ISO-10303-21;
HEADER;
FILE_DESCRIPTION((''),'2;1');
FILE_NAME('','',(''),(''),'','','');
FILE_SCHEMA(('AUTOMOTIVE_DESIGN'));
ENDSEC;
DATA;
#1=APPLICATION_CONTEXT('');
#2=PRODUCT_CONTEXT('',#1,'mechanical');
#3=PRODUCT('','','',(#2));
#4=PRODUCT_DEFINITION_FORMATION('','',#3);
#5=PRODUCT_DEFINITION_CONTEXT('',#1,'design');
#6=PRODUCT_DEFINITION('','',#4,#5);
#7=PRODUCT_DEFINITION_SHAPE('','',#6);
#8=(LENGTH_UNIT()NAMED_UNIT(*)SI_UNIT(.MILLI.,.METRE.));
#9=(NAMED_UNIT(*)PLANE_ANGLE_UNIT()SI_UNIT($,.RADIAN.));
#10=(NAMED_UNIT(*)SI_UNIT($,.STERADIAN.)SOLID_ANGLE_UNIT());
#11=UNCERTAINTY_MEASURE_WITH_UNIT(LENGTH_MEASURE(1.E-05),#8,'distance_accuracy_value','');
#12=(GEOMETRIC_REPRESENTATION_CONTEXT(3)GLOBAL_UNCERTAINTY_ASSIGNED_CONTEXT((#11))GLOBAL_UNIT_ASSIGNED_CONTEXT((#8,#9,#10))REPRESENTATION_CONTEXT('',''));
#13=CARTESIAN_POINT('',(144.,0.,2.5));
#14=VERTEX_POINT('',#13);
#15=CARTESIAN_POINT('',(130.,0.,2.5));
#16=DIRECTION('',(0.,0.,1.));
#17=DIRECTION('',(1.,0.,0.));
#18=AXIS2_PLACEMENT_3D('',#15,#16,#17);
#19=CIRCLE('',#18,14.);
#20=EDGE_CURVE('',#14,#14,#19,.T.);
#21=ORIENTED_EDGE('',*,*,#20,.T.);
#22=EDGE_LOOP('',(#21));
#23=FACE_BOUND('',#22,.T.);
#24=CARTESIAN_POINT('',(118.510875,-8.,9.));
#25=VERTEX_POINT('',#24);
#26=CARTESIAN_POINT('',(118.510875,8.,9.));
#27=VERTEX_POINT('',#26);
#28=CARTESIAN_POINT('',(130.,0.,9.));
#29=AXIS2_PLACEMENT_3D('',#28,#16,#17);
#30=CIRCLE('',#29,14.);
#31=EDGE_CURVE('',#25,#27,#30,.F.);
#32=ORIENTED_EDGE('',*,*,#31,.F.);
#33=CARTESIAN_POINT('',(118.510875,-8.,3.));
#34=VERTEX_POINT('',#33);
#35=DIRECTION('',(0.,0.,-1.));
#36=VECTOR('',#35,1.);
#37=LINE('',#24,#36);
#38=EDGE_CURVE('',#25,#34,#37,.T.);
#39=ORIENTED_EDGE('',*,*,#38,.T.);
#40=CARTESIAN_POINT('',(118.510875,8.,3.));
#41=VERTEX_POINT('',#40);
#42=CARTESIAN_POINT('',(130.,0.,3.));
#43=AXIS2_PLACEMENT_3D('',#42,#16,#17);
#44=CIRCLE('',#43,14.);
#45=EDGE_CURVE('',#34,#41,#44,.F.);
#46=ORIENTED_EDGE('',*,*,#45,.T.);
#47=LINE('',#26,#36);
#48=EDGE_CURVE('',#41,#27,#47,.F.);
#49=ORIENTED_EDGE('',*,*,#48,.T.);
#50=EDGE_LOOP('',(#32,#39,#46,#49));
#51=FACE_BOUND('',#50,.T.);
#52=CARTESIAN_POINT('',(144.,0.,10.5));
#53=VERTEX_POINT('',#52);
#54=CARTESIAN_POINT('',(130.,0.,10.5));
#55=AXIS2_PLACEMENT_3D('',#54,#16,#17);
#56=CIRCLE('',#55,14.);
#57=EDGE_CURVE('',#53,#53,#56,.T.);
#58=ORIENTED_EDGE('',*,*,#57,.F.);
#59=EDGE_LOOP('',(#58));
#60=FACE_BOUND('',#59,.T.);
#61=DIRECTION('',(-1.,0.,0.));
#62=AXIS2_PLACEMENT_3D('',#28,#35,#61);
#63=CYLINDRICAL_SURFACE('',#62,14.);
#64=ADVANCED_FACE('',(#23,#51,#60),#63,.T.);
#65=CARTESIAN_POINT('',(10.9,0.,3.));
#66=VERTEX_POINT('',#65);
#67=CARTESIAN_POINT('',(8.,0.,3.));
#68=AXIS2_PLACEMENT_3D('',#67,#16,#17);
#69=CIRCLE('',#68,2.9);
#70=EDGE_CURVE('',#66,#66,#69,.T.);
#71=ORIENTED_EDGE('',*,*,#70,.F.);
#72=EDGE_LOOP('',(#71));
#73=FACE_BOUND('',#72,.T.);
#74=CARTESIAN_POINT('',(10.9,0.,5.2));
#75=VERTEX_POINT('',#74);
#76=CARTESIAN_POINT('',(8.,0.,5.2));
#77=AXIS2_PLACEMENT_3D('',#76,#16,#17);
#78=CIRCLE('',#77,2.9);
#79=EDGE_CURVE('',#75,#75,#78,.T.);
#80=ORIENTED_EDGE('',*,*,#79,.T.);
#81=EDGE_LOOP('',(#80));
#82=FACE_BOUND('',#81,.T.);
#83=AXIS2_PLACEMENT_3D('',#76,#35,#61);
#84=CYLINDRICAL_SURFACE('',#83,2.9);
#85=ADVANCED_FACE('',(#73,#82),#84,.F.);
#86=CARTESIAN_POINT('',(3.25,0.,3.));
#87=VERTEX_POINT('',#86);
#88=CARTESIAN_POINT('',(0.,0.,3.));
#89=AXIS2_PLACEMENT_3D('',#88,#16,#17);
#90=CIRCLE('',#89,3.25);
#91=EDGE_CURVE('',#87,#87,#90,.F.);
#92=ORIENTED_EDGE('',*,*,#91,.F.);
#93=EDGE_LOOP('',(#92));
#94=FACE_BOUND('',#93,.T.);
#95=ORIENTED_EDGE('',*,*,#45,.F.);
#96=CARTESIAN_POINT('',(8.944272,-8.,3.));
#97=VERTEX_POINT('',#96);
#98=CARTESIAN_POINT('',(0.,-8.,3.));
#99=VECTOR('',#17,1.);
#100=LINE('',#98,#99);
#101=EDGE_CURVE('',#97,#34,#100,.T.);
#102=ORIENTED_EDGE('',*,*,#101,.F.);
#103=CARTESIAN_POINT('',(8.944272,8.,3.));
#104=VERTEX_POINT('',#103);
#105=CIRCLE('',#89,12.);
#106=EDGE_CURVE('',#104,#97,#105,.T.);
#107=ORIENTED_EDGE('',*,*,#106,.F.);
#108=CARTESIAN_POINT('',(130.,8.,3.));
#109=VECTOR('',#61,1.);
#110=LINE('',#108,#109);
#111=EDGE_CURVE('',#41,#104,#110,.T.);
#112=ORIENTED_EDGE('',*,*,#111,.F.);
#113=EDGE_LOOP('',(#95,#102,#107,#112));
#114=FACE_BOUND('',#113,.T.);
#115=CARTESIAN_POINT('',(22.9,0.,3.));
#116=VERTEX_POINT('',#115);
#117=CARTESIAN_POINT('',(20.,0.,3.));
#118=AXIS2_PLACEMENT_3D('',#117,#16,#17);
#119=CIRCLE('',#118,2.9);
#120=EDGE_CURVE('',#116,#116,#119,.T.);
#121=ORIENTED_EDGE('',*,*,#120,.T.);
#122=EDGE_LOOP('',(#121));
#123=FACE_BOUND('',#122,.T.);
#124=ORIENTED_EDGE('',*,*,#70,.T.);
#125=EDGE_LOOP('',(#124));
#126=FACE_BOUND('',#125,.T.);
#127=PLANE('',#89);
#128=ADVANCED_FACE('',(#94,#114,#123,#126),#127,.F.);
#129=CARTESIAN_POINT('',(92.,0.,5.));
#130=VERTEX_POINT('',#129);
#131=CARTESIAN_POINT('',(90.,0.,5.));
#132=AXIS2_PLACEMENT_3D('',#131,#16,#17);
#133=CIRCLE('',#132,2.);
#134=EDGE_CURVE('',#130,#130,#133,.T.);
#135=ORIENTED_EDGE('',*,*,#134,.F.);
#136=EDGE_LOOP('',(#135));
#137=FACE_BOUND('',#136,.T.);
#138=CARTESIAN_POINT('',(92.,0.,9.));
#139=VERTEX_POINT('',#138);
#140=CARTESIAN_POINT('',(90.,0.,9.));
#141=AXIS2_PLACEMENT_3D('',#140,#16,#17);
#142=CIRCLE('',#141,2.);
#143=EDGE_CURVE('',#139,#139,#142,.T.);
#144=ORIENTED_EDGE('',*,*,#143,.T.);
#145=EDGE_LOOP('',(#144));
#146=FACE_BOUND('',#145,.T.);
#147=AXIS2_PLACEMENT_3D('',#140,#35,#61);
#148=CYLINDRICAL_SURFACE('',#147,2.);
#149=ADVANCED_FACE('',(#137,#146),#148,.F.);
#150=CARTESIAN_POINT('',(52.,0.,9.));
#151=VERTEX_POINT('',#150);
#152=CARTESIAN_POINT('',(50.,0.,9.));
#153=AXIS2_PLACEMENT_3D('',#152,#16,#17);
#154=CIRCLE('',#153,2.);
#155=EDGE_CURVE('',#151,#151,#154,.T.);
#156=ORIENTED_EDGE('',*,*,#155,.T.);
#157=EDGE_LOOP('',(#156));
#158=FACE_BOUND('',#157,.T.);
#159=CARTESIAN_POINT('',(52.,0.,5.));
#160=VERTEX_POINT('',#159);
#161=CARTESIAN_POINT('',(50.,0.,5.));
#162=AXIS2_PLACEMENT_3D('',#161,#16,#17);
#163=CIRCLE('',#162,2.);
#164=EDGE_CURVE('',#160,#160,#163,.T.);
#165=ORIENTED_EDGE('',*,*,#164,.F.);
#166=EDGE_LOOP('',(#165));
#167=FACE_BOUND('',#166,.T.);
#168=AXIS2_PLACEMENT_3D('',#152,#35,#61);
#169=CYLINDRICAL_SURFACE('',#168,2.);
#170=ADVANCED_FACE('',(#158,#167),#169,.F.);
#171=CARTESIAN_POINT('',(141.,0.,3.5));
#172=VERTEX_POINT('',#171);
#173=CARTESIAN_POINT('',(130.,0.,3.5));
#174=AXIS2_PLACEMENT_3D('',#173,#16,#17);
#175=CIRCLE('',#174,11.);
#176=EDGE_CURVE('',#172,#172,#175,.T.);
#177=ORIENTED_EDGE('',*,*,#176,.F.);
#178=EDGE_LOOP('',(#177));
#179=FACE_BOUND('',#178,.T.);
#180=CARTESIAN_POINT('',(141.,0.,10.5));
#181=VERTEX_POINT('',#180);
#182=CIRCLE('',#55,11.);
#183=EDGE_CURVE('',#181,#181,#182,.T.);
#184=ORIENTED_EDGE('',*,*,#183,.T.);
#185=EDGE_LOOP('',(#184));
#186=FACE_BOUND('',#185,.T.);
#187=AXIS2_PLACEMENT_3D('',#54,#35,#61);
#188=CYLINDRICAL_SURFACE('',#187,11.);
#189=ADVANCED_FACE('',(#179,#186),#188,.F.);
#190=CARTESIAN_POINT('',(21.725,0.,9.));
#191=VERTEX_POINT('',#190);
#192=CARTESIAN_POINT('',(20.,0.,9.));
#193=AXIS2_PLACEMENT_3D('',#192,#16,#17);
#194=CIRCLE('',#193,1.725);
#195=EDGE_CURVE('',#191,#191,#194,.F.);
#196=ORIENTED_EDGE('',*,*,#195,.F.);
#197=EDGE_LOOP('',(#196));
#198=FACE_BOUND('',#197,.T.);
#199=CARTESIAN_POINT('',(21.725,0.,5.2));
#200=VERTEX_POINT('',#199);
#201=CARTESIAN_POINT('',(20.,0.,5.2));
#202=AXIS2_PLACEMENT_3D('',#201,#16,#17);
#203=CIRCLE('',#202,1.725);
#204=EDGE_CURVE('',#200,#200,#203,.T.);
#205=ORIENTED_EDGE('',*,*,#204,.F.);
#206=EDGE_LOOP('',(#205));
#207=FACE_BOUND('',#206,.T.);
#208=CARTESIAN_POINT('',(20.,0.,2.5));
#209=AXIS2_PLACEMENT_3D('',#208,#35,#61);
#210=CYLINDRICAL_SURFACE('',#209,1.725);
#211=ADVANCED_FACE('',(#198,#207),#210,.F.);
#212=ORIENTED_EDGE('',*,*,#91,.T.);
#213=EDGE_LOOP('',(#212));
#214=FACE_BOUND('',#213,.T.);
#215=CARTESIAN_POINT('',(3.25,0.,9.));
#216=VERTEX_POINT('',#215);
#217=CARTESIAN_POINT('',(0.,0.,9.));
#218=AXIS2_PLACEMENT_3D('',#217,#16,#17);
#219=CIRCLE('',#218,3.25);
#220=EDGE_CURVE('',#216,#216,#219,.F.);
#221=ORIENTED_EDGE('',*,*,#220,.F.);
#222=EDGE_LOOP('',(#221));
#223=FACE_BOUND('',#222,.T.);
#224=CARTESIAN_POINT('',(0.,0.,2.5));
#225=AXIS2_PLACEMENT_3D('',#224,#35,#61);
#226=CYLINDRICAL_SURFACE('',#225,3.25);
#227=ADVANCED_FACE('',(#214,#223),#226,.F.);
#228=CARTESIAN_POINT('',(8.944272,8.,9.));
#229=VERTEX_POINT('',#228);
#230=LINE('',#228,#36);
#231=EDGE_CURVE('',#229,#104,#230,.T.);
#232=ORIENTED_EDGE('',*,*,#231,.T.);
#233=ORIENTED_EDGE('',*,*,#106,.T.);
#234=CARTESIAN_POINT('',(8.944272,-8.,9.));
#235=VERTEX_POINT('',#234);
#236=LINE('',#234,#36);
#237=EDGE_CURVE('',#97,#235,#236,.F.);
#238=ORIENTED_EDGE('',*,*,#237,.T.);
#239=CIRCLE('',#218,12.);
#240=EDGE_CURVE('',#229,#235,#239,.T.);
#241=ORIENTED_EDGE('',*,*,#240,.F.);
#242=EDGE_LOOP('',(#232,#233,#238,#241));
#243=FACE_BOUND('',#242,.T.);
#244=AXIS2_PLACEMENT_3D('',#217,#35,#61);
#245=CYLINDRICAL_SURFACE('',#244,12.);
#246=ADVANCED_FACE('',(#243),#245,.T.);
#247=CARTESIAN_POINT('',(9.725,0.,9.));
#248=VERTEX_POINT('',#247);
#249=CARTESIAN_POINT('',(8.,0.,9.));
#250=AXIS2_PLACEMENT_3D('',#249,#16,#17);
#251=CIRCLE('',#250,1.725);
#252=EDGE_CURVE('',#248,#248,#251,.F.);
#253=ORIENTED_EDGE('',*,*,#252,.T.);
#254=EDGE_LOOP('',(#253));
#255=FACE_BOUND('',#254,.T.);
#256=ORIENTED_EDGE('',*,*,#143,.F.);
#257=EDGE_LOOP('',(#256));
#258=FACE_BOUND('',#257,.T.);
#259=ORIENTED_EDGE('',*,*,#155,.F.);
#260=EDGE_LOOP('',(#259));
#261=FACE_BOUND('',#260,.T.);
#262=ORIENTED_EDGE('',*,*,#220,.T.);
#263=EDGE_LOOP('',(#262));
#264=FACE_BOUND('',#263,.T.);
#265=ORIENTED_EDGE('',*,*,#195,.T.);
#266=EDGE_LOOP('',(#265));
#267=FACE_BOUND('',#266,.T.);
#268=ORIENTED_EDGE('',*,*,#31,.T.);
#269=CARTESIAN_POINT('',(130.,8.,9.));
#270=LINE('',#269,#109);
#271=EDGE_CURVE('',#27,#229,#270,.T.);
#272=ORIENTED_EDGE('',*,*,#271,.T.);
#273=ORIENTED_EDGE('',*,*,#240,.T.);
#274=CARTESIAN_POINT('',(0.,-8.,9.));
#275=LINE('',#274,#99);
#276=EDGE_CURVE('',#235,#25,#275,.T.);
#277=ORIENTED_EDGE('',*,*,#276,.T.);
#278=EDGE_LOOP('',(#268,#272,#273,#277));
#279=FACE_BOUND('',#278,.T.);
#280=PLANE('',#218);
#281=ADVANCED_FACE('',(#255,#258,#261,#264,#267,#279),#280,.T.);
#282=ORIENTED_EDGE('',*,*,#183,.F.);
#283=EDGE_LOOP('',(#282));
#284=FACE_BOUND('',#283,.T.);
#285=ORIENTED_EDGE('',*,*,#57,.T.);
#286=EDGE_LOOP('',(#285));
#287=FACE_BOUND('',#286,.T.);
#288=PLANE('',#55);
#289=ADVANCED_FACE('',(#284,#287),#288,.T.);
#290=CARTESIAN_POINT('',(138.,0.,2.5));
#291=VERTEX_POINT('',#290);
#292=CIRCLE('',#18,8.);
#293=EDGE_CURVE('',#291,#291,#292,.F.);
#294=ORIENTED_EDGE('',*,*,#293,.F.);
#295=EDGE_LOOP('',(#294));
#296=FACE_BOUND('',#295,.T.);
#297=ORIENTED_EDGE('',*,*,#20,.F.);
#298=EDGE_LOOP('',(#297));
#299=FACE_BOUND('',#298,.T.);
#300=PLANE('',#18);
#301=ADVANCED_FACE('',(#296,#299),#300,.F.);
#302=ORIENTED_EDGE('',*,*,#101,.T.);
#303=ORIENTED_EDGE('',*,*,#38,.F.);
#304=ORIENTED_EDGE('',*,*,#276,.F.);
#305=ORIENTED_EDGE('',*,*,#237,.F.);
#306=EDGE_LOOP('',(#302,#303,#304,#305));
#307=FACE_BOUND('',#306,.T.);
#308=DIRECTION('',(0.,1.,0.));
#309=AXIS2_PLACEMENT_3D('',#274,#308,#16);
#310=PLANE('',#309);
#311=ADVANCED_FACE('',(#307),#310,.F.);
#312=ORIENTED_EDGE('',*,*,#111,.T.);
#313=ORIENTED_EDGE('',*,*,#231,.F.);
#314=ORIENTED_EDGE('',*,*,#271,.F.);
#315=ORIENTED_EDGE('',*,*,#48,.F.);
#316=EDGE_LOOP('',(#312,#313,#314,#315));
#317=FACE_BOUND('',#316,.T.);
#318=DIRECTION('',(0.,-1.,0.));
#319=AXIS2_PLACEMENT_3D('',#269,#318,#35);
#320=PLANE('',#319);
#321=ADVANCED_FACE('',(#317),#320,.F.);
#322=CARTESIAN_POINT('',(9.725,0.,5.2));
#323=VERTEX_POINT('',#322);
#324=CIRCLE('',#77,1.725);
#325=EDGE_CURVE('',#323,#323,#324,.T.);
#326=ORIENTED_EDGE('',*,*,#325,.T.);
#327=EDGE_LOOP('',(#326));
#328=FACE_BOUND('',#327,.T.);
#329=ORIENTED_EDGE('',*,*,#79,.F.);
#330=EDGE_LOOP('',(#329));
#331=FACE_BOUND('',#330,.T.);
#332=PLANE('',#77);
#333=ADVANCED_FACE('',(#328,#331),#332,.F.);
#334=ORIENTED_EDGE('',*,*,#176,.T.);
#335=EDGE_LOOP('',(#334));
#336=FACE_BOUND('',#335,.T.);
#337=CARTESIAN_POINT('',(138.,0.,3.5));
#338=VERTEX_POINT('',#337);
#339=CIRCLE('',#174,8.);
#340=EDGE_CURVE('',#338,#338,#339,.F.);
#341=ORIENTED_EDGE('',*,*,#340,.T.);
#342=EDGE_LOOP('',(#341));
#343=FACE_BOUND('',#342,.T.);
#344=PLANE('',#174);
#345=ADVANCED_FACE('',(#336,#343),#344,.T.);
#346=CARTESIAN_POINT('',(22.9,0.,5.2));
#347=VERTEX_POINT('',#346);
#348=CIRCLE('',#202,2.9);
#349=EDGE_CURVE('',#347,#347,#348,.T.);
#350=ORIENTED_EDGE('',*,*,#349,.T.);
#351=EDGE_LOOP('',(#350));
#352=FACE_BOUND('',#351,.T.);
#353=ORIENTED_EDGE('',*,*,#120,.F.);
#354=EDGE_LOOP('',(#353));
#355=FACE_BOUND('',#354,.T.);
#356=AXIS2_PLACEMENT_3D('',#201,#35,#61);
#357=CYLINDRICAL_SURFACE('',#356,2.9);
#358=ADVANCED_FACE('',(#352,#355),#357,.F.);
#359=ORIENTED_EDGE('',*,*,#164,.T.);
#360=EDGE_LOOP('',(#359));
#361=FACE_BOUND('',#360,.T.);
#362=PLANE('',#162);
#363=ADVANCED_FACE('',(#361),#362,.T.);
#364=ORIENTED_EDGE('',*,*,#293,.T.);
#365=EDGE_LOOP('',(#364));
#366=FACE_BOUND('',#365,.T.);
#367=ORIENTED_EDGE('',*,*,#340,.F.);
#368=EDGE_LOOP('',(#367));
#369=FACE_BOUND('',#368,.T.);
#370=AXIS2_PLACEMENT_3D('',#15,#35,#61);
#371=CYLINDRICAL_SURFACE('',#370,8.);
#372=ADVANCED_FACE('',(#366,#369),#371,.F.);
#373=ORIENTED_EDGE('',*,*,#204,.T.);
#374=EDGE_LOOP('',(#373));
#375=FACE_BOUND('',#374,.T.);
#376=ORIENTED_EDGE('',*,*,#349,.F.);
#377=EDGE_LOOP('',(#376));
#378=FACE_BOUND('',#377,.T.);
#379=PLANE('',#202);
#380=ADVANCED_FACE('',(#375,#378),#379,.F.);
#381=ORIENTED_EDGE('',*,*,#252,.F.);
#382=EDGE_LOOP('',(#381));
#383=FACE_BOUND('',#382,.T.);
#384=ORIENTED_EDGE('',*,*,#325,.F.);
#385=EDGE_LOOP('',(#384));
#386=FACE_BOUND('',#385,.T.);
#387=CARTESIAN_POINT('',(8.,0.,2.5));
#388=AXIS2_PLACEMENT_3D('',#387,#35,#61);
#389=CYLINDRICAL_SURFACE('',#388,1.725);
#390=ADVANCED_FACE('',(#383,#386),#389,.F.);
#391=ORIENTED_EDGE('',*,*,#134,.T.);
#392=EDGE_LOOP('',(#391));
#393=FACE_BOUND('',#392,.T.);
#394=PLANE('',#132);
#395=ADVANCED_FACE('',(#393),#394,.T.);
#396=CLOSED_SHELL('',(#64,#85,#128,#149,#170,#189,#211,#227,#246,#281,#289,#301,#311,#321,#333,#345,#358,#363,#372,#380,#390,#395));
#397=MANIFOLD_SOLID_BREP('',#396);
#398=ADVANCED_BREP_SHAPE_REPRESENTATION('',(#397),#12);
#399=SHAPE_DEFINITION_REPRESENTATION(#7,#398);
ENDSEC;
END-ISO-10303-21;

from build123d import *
from build123d.topology import SkipClean

# Parameters (mm, degrees)
BOSS_EXTRUDE1_START     = 3
SKETCH1_W               = 130
SKETCH1_H               = 16
BOSS_EXTRUDE1_DEPTH     = 6
BOSS_EXTRUDE2_START     = 3
SKETCH2_R               = 12
BOSS_EXTRUDE2_DEPTH     = 6
BOSS_EXTRUDE3_START     = 3
SKETCH3_R               = 14
BOSS_EXTRUDE3_DEPTH     = 6
BOSS_EXTRUDE4_START     = 2.5
SKETCH4_R               = 14
BOSS_EXTRUDE4_DEPTH     = 8
CUT_EXTRUDE1_DEPTH      = 146.059470563
CUT_EXTRUDE1_DEPTH_BACK = 146.059470563
SKETCH5_R               = 3.25
CUT_EXTRUDE2_DEPTH      = 146.059470563
CUT_EXTRUDE2_DEPTH_BACK = 146.059470563
SKETCH6_R               = 1.725
CUT_EXTRUDE3_START      = 3
SKETCH7_R               = 2.9
CUT_EXTRUDE3_DEPTH      = 2.2
CUT_EXTRUDE4_START      = 3
SKETCH8_R               = 2.9
CUT_EXTRUDE4_DEPTH      = 2.2
CUT_EXTRUDE5_START      = 3.5
SKETCH9_R               = 11
CUT_EXTRUDE5_DEPTH      = 7
CUT_EXTRUDE6_DEPTH      = 146.059470563
CUT_EXTRUDE6_DEPTH_BACK = 146.059470563
SKETCH10_R              = 8
CUT_EXTRUDE7_START      = 5
SKETCH11_R              = 2
CUT_EXTRUDE7_DEPTH      = 4


with BuildPart() as part:
    # Sketch1 → Boss-Extrude1 (new body)
    with BuildSketch(Plane.XY.offset(BOSS_EXTRUDE1_START)):
        with Locations((65, 0)):
            Rectangle(SKETCH1_W, SKETCH1_H)
    extrude(amount=BOSS_EXTRUDE1_DEPTH)

    # Sketch2 → Boss-Extrude2 (add)
    with BuildSketch(Plane.XY.offset(BOSS_EXTRUDE2_START)):
        Circle(SKETCH2_R)
    extrude(amount=BOSS_EXTRUDE2_DEPTH)

    # Sketch3 → Boss-Extrude3 (add)
    with BuildSketch(Plane.XY.offset(BOSS_EXTRUDE3_START)):
        with Locations((130, 0)):
            Circle(SKETCH3_R)
    extrude(amount=BOSS_EXTRUDE3_DEPTH)

    # Sketch4 → Boss-Extrude4 (add)
    with SkipClean():  # the faces are left unmerged after this step: merging them gives an invalid solid
        with BuildSketch(Plane.XY.offset(BOSS_EXTRUDE4_START)):
            with Locations((130, 0)):
                Circle(SKETCH4_R)
        extrude(amount=BOSS_EXTRUDE4_DEPTH)
    add(part.part.scale(1), mode=Mode.REPLACE)  # the faces are merged on a copy

    # Sketch5 → Cut-Extrude1 (cut, two sides: drawn at the far end of the back side and taken through both)
    with BuildSketch(Plane.XY.offset(-CUT_EXTRUDE1_DEPTH_BACK)):
        Circle(SKETCH5_R)
    extrude(amount=CUT_EXTRUDE1_DEPTH + CUT_EXTRUDE1_DEPTH_BACK, mode=Mode.SUBTRACT)

    # Sketch6 → Cut-Extrude2 (cut, two sides: drawn at the far end of the back side and taken through both)
    with BuildSketch(Plane.XY.offset(-CUT_EXTRUDE2_DEPTH_BACK)):
        with Locations((8, 0)):
            Circle(SKETCH6_R)
        with Locations((20, 0)):
            Circle(SKETCH6_R)
    extrude(amount=CUT_EXTRUDE2_DEPTH + CUT_EXTRUDE2_DEPTH_BACK, mode=Mode.SUBTRACT)

    # Sketch7 → Cut-Extrude3 (cut)
    with BuildSketch(Plane.XY.offset(CUT_EXTRUDE3_START)):
        with Locations((8, 0)):
            Circle(SKETCH7_R)
    extrude(amount=CUT_EXTRUDE3_DEPTH, mode=Mode.SUBTRACT)

    # Sketch8 → Cut-Extrude4 (cut)
    with BuildSketch(Plane.XY.offset(CUT_EXTRUDE4_START)):
        with Locations((20, 0)):
            Circle(SKETCH8_R)
    extrude(amount=CUT_EXTRUDE4_DEPTH, mode=Mode.SUBTRACT)

    # Sketch9 → Cut-Extrude5 (cut)
    with BuildSketch(Plane.XY.offset(CUT_EXTRUDE5_START)):
        with Locations((130, 0)):
            Circle(SKETCH9_R)
    extrude(amount=CUT_EXTRUDE5_DEPTH, mode=Mode.SUBTRACT)

    # Sketch10 → Cut-Extrude6 (cut, two sides: drawn at the far end of the back side and taken through both)
    with BuildSketch(Plane.XY.offset(-CUT_EXTRUDE6_DEPTH_BACK)):
        with Locations((130, 0)):
            Circle(SKETCH10_R)
    extrude(amount=CUT_EXTRUDE6_DEPTH + CUT_EXTRUDE6_DEPTH_BACK, mode=Mode.SUBTRACT)

    # Sketch11 → Cut-Extrude7 (cut)
    with BuildSketch(Plane.XY.offset(CUT_EXTRUDE7_START)):
        with Locations((50, 0)):
            Circle(SKETCH11_R)
        with Locations((90, 0)):
            Circle(SKETCH11_R)
    extrude(amount=CUT_EXTRUDE7_DEPTH, mode=Mode.SUBTRACT)


solid = part.part
